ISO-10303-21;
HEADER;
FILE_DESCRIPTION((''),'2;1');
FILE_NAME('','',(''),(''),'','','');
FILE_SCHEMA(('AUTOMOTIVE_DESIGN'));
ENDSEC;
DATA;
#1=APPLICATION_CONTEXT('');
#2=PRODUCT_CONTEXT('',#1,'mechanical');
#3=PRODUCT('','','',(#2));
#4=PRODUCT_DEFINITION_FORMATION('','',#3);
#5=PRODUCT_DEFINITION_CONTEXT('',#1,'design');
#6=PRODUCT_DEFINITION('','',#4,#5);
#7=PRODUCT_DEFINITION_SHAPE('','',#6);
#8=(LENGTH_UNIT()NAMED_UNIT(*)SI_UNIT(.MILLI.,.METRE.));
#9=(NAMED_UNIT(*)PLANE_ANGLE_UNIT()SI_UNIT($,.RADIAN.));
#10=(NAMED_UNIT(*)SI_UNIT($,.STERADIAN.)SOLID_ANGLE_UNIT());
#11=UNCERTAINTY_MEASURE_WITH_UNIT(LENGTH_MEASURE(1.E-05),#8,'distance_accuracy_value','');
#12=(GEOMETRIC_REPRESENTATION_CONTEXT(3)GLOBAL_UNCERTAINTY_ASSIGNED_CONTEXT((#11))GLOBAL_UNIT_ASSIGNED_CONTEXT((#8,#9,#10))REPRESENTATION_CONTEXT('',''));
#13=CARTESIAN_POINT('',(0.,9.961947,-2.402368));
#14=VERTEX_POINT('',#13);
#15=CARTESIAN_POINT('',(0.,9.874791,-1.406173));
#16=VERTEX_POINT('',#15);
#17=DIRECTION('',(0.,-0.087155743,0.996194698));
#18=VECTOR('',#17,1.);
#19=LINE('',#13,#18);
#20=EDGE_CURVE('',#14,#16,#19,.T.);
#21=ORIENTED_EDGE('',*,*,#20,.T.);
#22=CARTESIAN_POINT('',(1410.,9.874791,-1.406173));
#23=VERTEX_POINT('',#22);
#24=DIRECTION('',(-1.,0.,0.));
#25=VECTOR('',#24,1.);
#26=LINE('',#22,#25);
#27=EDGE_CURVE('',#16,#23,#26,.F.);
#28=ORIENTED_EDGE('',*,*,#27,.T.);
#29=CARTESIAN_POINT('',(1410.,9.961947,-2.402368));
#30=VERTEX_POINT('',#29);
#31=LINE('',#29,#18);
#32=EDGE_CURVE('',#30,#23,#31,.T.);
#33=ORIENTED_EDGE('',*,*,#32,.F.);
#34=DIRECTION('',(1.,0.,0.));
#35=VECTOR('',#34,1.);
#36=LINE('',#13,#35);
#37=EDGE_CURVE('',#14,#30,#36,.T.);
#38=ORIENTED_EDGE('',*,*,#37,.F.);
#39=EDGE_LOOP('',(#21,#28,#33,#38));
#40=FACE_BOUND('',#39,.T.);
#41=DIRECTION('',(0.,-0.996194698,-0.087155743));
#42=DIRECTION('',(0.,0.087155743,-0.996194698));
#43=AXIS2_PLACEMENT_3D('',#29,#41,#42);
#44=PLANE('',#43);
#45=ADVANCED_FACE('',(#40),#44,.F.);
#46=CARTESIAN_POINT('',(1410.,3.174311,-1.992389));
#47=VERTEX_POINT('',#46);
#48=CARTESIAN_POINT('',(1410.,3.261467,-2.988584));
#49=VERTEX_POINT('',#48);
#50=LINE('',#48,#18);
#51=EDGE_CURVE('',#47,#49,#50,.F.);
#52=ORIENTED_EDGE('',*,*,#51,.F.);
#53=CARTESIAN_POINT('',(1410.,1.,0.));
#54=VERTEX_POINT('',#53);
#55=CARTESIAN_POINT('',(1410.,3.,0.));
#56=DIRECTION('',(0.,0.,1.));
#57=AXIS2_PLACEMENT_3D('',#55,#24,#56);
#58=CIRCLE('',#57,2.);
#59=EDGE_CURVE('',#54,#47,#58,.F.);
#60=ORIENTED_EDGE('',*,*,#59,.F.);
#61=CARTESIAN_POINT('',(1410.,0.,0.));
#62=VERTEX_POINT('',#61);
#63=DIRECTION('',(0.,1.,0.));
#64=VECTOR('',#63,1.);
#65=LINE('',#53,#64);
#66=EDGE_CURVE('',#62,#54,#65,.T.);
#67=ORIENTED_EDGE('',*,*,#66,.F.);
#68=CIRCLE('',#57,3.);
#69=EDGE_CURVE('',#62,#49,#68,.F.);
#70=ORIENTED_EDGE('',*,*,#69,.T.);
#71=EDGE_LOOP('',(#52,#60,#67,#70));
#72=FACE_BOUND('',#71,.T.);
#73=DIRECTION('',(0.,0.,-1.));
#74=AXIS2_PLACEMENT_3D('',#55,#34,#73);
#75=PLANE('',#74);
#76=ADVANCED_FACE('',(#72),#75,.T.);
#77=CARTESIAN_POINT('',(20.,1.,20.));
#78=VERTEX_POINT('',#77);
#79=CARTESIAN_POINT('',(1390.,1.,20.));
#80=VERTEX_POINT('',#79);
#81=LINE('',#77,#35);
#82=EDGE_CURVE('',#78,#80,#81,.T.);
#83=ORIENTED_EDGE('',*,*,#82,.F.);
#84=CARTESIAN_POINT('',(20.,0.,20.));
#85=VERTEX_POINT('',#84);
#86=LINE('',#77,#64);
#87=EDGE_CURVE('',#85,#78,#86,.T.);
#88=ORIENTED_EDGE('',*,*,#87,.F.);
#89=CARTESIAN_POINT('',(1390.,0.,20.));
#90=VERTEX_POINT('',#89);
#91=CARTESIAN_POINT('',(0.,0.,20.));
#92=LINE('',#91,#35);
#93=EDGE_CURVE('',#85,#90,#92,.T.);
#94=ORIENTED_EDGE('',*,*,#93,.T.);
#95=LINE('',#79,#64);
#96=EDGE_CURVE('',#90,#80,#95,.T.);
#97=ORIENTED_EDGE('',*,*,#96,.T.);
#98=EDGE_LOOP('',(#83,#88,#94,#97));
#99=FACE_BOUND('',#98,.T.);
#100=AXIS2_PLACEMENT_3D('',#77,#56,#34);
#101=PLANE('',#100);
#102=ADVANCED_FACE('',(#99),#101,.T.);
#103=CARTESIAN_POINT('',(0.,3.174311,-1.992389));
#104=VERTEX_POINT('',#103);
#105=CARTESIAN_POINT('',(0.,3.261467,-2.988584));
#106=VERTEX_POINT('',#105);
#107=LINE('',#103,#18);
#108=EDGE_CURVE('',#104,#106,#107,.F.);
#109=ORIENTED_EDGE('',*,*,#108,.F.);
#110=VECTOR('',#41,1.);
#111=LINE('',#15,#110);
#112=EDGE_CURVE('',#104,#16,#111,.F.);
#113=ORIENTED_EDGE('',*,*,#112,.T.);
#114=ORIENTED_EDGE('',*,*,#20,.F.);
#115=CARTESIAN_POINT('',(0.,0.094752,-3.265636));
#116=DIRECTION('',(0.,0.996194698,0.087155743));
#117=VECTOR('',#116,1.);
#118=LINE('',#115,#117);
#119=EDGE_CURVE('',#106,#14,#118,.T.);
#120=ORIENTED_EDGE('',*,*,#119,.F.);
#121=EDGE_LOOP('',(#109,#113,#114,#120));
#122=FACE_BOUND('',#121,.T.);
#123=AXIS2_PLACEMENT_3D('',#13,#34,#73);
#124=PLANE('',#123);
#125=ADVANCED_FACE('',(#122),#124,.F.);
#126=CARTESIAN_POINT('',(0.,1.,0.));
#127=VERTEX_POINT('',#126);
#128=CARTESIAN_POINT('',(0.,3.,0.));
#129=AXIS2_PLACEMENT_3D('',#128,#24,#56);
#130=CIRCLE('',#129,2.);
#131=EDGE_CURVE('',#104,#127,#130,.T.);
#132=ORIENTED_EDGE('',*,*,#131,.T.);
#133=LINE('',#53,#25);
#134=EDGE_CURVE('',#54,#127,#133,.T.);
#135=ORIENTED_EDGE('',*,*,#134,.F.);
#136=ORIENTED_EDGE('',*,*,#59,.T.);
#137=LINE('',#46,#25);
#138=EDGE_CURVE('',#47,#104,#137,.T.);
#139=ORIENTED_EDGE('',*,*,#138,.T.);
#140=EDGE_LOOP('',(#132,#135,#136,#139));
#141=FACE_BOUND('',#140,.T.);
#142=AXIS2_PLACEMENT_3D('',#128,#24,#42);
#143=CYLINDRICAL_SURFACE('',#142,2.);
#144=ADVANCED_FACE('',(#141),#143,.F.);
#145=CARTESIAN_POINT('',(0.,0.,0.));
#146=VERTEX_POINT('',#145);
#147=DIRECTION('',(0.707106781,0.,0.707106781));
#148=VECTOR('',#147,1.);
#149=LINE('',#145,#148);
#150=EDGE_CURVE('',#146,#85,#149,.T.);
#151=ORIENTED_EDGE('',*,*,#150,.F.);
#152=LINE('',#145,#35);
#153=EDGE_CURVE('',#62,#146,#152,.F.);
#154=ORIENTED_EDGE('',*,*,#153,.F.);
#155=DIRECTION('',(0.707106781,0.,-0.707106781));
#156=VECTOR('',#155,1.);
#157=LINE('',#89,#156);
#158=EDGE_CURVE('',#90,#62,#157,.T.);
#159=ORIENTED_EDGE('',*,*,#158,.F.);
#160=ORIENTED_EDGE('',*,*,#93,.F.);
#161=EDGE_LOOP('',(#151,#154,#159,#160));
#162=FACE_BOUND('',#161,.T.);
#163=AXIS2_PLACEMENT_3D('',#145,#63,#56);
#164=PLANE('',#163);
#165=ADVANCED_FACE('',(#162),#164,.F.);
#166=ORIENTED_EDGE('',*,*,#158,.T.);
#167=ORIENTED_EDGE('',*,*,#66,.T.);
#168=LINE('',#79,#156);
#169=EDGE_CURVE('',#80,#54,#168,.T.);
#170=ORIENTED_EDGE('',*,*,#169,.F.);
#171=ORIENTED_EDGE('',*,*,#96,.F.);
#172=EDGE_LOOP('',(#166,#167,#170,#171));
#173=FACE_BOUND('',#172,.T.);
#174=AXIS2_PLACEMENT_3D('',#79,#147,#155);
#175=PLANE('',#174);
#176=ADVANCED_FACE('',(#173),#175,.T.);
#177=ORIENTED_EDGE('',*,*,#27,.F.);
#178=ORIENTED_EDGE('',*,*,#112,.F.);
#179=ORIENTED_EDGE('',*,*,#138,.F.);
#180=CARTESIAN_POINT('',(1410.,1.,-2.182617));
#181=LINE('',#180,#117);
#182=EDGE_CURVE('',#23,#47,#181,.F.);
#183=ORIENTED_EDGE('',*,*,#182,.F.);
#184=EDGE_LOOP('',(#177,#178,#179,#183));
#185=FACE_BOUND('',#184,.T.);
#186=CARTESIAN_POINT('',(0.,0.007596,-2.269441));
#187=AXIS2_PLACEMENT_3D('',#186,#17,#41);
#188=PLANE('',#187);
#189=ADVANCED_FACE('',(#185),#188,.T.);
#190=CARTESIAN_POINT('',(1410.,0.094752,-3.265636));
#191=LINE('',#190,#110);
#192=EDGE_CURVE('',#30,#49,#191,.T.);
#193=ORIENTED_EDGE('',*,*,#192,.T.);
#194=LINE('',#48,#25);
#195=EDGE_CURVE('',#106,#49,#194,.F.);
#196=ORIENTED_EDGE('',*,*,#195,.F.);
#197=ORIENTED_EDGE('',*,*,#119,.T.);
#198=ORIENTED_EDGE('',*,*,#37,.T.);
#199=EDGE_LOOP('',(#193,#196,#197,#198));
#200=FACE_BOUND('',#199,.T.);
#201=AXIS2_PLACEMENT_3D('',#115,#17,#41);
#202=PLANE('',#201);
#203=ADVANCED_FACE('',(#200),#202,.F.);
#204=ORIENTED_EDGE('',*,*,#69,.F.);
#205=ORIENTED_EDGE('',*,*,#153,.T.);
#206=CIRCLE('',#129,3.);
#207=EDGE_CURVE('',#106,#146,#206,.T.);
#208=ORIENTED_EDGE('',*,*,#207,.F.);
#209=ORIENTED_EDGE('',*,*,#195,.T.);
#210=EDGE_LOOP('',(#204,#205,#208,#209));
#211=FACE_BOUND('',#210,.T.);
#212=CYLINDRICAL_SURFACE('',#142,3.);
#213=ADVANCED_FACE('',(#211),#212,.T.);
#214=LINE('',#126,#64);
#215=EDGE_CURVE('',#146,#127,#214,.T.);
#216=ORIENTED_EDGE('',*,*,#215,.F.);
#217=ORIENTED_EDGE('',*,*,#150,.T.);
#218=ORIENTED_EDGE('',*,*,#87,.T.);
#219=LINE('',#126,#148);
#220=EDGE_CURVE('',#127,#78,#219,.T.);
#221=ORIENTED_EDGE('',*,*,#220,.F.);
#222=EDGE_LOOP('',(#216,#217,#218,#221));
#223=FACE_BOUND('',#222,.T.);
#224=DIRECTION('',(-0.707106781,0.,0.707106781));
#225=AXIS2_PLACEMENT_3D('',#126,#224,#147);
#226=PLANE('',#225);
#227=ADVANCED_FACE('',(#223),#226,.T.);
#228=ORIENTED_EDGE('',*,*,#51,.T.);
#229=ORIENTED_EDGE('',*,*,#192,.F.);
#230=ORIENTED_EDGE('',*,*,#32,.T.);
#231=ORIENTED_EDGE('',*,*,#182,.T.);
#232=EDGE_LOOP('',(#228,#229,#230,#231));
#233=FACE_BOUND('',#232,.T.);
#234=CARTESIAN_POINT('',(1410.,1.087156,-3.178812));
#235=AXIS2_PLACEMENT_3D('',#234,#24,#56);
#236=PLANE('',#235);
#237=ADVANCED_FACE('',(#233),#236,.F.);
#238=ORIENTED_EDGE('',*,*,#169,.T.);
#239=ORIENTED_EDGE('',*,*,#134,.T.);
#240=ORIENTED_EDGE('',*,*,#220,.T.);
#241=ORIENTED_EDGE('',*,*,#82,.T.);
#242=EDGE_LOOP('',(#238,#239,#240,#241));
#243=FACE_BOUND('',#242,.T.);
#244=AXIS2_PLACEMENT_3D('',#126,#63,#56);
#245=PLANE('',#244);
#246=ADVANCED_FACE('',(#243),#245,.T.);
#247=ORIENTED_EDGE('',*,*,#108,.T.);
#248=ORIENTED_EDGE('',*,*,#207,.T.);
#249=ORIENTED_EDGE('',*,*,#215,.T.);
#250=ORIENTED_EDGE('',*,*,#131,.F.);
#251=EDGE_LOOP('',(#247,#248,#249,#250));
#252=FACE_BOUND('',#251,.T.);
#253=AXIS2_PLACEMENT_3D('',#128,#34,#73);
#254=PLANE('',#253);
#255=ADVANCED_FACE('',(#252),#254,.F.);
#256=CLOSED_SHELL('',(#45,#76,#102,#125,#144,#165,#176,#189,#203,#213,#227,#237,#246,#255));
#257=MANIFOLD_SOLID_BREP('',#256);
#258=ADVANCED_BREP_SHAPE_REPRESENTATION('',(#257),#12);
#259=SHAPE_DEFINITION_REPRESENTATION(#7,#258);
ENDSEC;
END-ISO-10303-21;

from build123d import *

# Parameters (mm, degrees)
EXTRUDE_1_DEPTH        = 1
SM_EDGE_FLANGE_1_DEPTH = 1410


# Sheet-metal steps are written as plain solids
with BuildPart() as part:
    # Sketch 1 → Бобышка-Вытянуть1 (new body)
    with BuildSketch(Plane(origin=(0, 0, 0), x_dir=(1, 0, 0), z_dir=(0, 1, 0))):
        Polygon((0, 0), (20, -20), (1390, -20), (1410, 0), align=None)
    extrude(amount=EXTRUDE_1_DEPTH)

    # Ребро-кромка1 section (across the edge) → Ребро-кромка1 (add)
    with BuildSketch(Plane(origin=(1410, 1, -2.182617002), x_dir=(0, -0.08715574274765482, 0.9961946980917459), z_dir=(-1, 0, 0))):
        with BuildLine():
            Line((-1, 2.182617002), (-1, 8.908691499))
            Line((-1, 8.908691499), (0, 8.908691499))
            Line((0, 8.908691499), (0, 2.182617002))
            ThreePointArc((0, 2.182617002), (0.648819585, 0.708062329), (2.174311485, 0.190227606))
            Line((2.174311485, 0.190227606), (2.261467228, -0.805967092))
            ThreePointArc((2.261467228, -0.805967092), (-0.026770623, -0.029215008), (-1, 2.182617002))
        make_face()
    extrude(amount=SM_EDGE_FLANGE_1_DEPTH)


solid = part.part
